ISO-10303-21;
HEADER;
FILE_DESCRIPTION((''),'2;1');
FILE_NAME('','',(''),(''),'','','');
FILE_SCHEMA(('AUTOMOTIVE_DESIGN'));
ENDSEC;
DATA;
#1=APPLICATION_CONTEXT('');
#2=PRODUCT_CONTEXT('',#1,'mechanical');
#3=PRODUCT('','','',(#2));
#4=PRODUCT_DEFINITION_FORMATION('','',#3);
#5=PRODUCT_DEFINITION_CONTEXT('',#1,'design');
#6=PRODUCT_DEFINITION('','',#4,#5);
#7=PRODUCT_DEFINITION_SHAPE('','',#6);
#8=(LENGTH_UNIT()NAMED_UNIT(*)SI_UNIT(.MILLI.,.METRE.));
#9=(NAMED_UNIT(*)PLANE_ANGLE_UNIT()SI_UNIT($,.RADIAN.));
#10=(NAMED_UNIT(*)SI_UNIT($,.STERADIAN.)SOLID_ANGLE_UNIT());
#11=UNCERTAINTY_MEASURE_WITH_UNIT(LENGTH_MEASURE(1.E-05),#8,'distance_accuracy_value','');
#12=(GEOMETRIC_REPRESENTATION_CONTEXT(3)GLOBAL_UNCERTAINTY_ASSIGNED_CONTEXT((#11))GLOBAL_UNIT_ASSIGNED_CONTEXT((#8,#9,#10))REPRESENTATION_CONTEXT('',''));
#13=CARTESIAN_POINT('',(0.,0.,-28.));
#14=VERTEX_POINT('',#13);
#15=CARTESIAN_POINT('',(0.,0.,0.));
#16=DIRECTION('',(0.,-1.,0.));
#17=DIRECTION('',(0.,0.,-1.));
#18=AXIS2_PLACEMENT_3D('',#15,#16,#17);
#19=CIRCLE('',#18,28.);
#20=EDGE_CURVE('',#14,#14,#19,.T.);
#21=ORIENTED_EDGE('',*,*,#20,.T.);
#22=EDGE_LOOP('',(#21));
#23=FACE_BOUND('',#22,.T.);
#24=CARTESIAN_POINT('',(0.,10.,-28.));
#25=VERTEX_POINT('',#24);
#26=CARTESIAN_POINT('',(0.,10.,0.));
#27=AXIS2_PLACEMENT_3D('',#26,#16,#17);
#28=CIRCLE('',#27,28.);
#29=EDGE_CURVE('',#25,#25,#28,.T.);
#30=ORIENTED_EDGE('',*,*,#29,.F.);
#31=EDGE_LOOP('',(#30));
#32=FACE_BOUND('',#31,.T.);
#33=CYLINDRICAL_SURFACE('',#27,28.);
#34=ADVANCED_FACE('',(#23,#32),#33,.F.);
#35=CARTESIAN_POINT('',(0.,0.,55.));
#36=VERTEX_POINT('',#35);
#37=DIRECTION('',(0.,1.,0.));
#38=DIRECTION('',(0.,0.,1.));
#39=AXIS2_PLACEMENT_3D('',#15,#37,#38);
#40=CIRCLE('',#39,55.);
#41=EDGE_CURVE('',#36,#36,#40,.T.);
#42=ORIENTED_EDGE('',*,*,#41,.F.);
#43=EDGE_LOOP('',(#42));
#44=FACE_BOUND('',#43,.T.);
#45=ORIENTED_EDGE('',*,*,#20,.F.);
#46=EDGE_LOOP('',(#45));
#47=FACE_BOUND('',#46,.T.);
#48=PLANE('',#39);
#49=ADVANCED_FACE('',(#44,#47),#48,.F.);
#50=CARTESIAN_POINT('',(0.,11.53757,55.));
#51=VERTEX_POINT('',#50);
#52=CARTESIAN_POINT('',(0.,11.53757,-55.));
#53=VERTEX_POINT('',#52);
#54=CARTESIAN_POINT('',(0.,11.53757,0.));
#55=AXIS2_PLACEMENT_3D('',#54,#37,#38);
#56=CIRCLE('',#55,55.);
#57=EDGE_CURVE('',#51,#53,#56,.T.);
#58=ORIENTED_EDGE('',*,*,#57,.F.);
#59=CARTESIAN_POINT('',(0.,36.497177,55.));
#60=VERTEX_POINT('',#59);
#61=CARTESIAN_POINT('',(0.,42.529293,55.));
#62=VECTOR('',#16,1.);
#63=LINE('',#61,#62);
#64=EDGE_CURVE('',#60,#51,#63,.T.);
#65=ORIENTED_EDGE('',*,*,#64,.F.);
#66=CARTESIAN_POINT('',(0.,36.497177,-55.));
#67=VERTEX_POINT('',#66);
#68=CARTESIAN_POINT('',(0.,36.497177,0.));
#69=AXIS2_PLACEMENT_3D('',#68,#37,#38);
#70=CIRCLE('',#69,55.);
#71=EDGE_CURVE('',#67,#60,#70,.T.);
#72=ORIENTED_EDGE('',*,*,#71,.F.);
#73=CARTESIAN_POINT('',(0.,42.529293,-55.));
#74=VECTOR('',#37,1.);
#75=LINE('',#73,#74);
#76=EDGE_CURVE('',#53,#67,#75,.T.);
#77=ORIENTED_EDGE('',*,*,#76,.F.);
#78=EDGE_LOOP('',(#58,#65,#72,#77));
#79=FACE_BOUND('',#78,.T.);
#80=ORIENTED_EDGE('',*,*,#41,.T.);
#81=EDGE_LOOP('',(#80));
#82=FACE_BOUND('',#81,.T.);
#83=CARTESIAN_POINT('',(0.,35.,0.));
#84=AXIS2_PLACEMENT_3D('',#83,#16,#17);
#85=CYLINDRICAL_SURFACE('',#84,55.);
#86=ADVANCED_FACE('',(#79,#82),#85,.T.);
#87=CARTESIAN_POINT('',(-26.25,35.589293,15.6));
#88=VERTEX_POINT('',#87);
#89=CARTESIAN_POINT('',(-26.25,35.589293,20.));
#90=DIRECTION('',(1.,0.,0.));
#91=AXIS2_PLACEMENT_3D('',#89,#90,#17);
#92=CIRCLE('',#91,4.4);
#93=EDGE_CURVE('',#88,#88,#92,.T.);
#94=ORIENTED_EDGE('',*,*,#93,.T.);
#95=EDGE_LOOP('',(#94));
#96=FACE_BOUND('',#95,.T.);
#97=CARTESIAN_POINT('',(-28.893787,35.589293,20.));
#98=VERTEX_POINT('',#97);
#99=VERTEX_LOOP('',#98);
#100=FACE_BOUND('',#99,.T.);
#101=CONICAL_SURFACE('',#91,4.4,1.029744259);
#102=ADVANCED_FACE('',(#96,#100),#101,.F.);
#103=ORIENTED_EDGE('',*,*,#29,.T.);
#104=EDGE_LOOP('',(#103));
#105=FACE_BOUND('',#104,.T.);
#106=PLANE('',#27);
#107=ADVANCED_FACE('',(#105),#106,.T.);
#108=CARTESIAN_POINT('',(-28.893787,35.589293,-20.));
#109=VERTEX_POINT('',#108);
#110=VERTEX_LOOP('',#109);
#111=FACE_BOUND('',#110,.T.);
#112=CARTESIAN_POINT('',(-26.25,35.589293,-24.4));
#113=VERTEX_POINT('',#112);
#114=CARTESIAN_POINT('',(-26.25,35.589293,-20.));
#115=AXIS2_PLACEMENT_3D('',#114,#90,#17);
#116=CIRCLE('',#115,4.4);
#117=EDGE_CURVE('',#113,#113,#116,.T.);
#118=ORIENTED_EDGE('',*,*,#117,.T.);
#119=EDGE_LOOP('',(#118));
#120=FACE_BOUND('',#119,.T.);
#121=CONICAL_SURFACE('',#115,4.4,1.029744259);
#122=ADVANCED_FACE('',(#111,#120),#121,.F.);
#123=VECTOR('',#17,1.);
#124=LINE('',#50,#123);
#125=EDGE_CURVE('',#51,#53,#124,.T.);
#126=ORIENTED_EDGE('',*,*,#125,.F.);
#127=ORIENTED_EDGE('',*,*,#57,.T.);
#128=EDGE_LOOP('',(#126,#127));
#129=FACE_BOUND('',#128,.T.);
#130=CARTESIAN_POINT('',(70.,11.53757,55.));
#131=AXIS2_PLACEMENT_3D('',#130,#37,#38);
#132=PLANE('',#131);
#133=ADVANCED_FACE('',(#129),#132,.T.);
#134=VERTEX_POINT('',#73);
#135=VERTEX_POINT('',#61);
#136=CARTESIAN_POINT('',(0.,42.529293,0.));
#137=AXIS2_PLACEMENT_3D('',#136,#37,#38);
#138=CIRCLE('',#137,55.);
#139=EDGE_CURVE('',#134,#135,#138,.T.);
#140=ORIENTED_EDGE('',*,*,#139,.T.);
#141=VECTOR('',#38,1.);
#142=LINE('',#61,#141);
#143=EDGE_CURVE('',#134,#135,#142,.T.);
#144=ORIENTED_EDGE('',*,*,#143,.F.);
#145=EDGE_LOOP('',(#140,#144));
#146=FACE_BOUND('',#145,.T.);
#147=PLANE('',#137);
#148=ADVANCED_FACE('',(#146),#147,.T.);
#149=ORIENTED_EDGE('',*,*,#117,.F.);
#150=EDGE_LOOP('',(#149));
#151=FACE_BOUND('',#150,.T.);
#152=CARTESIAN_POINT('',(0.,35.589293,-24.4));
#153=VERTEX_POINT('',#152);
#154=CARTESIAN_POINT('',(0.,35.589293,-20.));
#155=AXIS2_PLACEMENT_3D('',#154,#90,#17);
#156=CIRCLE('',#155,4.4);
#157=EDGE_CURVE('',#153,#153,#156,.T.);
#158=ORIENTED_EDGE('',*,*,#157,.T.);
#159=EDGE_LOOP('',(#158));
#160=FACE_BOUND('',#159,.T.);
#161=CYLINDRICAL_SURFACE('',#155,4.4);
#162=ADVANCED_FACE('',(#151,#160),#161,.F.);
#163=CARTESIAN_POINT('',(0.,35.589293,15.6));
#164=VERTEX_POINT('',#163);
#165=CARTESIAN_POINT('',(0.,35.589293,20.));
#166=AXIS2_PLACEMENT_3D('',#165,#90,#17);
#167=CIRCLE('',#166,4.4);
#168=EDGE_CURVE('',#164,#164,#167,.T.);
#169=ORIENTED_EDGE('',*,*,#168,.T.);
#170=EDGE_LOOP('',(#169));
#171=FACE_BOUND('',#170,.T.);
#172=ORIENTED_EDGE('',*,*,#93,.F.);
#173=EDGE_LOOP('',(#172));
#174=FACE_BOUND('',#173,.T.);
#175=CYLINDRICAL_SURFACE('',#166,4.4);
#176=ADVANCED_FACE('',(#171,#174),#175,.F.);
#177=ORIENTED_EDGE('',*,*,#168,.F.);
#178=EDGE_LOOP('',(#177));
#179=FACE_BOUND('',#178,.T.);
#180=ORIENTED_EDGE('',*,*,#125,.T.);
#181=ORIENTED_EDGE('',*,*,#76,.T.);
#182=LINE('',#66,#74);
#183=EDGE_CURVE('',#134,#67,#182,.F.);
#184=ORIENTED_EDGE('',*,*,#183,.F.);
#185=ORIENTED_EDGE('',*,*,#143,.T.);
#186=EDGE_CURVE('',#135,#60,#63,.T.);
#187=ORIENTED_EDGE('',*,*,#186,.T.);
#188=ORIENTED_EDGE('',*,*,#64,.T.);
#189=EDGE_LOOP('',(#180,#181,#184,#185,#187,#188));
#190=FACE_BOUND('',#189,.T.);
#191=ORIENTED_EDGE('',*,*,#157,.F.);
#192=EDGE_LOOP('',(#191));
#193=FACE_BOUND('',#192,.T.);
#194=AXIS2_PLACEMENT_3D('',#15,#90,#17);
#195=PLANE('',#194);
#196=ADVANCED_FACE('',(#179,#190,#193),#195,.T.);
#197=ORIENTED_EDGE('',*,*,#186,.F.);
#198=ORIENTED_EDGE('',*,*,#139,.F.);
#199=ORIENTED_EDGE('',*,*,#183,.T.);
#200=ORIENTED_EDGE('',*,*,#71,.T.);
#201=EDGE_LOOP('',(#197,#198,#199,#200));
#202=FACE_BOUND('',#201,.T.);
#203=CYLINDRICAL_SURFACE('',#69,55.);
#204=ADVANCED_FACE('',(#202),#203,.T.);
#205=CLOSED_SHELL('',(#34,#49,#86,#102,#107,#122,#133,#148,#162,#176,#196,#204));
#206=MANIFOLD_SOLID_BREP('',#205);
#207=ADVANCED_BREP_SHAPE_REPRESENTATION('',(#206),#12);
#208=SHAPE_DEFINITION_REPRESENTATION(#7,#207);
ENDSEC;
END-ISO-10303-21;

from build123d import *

# Parameters (mm, degrees)
SCHIZZO1_R                      = 55
ESTRUSIONE_ESTRUSIONE1_DEPTH    = 35
SCHIZZO2_R                      = 28
TAGLIO_ESTRUSIONE1_DEPTH        = 10
SWEEP1_START                    = 35
SWEEP1_OUTLINE_R                = 55
SWEEP1_DEPTH                    = 7.529292994
SCHIZZO10_W                     = 110
SCHIZZO10_H                     = 30.991723426
TAGLIO_ESTRUSIONE3_DEPTH        = 70
FORO_FILETTATO_M10X1_25_1_D     = 8.8
FORO_FILETTATO_M10X1_25_1_DEPTH = 26.25
FORO_FILETTATO_M10X1_25_1_TIP   = 2.643786724


# Read off the part's stored shape, not the designer's step: Sweep1
with BuildPart() as part:
    # Schizzo1 → Estrusione-Estrusione1 (new body)
    with BuildSketch(Plane(origin=(0, 0, 0), x_dir=(1, 0, 0), z_dir=(0, 1, 0))):
        with Locations(Location((0, 0, 0), (0, 0, 270))):
            Circle(SCHIZZO1_R)
    extrude(amount=ESTRUSIONE_ESTRUSIONE1_DEPTH)

    # Schizzo2 → Taglio-Estrusione1 (cut)
    with BuildSketch(Plane(origin=(0, 0, 0), x_dir=(-1, 0, 0), z_dir=(0, -1, 0))):
        with Locations(Location((0, 0, 0), (0, 0, 90))):
            Circle(SCHIZZO2_R)
    extrude(amount=-TAGLIO_ESTRUSIONE1_DEPTH, mode=Mode.SUBTRACT)

    # Sweep1 outline → Sweep1 (add)
    with BuildSketch(Plane(origin=(0, 0, 0), x_dir=(1, 0, 0), z_dir=(0, 1, 0)).offset(SWEEP1_START)):
        Circle(SWEEP1_OUTLINE_R)
    extrude(amount=SWEEP1_DEPTH)

    # Schizzo10 → Taglio-Estrusione3 (cut)
    with BuildSketch(Plane(origin=(0, 0, 0), x_dir=(0, 0, -1), z_dir=(1, 0, 0))):
        with Locations((0, 27.033431281)):
            Rectangle(SCHIZZO10_W, SCHIZZO10_H)
    extrude(amount=TAGLIO_ESTRUSIONE3_DEPTH, mode=Mode.SUBTRACT)

    # Foro filettato M10x1.25-1
    with Locations(Plane(origin=(0, 0, 0), x_dir=(0, 0, -1), z_dir=(1, 0, 0))):
        with Locations((-20, 35.589292994), (20, 35.589292994)):
            Hole(FORO_FILETTATO_M10X1_25_1_D / 2, depth=FORO_FILETTATO_M10X1_25_1_DEPTH)
            with Locations((0, 0, -(FORO_FILETTATO_M10X1_25_1_DEPTH + FORO_FILETTATO_M10X1_25_1_TIP / 2))):  # 118° drill point
                Cone(0, FORO_FILETTATO_M10X1_25_1_D / 2, FORO_FILETTATO_M10X1_25_1_TIP, mode=Mode.SUBTRACT)


solid = part.part
